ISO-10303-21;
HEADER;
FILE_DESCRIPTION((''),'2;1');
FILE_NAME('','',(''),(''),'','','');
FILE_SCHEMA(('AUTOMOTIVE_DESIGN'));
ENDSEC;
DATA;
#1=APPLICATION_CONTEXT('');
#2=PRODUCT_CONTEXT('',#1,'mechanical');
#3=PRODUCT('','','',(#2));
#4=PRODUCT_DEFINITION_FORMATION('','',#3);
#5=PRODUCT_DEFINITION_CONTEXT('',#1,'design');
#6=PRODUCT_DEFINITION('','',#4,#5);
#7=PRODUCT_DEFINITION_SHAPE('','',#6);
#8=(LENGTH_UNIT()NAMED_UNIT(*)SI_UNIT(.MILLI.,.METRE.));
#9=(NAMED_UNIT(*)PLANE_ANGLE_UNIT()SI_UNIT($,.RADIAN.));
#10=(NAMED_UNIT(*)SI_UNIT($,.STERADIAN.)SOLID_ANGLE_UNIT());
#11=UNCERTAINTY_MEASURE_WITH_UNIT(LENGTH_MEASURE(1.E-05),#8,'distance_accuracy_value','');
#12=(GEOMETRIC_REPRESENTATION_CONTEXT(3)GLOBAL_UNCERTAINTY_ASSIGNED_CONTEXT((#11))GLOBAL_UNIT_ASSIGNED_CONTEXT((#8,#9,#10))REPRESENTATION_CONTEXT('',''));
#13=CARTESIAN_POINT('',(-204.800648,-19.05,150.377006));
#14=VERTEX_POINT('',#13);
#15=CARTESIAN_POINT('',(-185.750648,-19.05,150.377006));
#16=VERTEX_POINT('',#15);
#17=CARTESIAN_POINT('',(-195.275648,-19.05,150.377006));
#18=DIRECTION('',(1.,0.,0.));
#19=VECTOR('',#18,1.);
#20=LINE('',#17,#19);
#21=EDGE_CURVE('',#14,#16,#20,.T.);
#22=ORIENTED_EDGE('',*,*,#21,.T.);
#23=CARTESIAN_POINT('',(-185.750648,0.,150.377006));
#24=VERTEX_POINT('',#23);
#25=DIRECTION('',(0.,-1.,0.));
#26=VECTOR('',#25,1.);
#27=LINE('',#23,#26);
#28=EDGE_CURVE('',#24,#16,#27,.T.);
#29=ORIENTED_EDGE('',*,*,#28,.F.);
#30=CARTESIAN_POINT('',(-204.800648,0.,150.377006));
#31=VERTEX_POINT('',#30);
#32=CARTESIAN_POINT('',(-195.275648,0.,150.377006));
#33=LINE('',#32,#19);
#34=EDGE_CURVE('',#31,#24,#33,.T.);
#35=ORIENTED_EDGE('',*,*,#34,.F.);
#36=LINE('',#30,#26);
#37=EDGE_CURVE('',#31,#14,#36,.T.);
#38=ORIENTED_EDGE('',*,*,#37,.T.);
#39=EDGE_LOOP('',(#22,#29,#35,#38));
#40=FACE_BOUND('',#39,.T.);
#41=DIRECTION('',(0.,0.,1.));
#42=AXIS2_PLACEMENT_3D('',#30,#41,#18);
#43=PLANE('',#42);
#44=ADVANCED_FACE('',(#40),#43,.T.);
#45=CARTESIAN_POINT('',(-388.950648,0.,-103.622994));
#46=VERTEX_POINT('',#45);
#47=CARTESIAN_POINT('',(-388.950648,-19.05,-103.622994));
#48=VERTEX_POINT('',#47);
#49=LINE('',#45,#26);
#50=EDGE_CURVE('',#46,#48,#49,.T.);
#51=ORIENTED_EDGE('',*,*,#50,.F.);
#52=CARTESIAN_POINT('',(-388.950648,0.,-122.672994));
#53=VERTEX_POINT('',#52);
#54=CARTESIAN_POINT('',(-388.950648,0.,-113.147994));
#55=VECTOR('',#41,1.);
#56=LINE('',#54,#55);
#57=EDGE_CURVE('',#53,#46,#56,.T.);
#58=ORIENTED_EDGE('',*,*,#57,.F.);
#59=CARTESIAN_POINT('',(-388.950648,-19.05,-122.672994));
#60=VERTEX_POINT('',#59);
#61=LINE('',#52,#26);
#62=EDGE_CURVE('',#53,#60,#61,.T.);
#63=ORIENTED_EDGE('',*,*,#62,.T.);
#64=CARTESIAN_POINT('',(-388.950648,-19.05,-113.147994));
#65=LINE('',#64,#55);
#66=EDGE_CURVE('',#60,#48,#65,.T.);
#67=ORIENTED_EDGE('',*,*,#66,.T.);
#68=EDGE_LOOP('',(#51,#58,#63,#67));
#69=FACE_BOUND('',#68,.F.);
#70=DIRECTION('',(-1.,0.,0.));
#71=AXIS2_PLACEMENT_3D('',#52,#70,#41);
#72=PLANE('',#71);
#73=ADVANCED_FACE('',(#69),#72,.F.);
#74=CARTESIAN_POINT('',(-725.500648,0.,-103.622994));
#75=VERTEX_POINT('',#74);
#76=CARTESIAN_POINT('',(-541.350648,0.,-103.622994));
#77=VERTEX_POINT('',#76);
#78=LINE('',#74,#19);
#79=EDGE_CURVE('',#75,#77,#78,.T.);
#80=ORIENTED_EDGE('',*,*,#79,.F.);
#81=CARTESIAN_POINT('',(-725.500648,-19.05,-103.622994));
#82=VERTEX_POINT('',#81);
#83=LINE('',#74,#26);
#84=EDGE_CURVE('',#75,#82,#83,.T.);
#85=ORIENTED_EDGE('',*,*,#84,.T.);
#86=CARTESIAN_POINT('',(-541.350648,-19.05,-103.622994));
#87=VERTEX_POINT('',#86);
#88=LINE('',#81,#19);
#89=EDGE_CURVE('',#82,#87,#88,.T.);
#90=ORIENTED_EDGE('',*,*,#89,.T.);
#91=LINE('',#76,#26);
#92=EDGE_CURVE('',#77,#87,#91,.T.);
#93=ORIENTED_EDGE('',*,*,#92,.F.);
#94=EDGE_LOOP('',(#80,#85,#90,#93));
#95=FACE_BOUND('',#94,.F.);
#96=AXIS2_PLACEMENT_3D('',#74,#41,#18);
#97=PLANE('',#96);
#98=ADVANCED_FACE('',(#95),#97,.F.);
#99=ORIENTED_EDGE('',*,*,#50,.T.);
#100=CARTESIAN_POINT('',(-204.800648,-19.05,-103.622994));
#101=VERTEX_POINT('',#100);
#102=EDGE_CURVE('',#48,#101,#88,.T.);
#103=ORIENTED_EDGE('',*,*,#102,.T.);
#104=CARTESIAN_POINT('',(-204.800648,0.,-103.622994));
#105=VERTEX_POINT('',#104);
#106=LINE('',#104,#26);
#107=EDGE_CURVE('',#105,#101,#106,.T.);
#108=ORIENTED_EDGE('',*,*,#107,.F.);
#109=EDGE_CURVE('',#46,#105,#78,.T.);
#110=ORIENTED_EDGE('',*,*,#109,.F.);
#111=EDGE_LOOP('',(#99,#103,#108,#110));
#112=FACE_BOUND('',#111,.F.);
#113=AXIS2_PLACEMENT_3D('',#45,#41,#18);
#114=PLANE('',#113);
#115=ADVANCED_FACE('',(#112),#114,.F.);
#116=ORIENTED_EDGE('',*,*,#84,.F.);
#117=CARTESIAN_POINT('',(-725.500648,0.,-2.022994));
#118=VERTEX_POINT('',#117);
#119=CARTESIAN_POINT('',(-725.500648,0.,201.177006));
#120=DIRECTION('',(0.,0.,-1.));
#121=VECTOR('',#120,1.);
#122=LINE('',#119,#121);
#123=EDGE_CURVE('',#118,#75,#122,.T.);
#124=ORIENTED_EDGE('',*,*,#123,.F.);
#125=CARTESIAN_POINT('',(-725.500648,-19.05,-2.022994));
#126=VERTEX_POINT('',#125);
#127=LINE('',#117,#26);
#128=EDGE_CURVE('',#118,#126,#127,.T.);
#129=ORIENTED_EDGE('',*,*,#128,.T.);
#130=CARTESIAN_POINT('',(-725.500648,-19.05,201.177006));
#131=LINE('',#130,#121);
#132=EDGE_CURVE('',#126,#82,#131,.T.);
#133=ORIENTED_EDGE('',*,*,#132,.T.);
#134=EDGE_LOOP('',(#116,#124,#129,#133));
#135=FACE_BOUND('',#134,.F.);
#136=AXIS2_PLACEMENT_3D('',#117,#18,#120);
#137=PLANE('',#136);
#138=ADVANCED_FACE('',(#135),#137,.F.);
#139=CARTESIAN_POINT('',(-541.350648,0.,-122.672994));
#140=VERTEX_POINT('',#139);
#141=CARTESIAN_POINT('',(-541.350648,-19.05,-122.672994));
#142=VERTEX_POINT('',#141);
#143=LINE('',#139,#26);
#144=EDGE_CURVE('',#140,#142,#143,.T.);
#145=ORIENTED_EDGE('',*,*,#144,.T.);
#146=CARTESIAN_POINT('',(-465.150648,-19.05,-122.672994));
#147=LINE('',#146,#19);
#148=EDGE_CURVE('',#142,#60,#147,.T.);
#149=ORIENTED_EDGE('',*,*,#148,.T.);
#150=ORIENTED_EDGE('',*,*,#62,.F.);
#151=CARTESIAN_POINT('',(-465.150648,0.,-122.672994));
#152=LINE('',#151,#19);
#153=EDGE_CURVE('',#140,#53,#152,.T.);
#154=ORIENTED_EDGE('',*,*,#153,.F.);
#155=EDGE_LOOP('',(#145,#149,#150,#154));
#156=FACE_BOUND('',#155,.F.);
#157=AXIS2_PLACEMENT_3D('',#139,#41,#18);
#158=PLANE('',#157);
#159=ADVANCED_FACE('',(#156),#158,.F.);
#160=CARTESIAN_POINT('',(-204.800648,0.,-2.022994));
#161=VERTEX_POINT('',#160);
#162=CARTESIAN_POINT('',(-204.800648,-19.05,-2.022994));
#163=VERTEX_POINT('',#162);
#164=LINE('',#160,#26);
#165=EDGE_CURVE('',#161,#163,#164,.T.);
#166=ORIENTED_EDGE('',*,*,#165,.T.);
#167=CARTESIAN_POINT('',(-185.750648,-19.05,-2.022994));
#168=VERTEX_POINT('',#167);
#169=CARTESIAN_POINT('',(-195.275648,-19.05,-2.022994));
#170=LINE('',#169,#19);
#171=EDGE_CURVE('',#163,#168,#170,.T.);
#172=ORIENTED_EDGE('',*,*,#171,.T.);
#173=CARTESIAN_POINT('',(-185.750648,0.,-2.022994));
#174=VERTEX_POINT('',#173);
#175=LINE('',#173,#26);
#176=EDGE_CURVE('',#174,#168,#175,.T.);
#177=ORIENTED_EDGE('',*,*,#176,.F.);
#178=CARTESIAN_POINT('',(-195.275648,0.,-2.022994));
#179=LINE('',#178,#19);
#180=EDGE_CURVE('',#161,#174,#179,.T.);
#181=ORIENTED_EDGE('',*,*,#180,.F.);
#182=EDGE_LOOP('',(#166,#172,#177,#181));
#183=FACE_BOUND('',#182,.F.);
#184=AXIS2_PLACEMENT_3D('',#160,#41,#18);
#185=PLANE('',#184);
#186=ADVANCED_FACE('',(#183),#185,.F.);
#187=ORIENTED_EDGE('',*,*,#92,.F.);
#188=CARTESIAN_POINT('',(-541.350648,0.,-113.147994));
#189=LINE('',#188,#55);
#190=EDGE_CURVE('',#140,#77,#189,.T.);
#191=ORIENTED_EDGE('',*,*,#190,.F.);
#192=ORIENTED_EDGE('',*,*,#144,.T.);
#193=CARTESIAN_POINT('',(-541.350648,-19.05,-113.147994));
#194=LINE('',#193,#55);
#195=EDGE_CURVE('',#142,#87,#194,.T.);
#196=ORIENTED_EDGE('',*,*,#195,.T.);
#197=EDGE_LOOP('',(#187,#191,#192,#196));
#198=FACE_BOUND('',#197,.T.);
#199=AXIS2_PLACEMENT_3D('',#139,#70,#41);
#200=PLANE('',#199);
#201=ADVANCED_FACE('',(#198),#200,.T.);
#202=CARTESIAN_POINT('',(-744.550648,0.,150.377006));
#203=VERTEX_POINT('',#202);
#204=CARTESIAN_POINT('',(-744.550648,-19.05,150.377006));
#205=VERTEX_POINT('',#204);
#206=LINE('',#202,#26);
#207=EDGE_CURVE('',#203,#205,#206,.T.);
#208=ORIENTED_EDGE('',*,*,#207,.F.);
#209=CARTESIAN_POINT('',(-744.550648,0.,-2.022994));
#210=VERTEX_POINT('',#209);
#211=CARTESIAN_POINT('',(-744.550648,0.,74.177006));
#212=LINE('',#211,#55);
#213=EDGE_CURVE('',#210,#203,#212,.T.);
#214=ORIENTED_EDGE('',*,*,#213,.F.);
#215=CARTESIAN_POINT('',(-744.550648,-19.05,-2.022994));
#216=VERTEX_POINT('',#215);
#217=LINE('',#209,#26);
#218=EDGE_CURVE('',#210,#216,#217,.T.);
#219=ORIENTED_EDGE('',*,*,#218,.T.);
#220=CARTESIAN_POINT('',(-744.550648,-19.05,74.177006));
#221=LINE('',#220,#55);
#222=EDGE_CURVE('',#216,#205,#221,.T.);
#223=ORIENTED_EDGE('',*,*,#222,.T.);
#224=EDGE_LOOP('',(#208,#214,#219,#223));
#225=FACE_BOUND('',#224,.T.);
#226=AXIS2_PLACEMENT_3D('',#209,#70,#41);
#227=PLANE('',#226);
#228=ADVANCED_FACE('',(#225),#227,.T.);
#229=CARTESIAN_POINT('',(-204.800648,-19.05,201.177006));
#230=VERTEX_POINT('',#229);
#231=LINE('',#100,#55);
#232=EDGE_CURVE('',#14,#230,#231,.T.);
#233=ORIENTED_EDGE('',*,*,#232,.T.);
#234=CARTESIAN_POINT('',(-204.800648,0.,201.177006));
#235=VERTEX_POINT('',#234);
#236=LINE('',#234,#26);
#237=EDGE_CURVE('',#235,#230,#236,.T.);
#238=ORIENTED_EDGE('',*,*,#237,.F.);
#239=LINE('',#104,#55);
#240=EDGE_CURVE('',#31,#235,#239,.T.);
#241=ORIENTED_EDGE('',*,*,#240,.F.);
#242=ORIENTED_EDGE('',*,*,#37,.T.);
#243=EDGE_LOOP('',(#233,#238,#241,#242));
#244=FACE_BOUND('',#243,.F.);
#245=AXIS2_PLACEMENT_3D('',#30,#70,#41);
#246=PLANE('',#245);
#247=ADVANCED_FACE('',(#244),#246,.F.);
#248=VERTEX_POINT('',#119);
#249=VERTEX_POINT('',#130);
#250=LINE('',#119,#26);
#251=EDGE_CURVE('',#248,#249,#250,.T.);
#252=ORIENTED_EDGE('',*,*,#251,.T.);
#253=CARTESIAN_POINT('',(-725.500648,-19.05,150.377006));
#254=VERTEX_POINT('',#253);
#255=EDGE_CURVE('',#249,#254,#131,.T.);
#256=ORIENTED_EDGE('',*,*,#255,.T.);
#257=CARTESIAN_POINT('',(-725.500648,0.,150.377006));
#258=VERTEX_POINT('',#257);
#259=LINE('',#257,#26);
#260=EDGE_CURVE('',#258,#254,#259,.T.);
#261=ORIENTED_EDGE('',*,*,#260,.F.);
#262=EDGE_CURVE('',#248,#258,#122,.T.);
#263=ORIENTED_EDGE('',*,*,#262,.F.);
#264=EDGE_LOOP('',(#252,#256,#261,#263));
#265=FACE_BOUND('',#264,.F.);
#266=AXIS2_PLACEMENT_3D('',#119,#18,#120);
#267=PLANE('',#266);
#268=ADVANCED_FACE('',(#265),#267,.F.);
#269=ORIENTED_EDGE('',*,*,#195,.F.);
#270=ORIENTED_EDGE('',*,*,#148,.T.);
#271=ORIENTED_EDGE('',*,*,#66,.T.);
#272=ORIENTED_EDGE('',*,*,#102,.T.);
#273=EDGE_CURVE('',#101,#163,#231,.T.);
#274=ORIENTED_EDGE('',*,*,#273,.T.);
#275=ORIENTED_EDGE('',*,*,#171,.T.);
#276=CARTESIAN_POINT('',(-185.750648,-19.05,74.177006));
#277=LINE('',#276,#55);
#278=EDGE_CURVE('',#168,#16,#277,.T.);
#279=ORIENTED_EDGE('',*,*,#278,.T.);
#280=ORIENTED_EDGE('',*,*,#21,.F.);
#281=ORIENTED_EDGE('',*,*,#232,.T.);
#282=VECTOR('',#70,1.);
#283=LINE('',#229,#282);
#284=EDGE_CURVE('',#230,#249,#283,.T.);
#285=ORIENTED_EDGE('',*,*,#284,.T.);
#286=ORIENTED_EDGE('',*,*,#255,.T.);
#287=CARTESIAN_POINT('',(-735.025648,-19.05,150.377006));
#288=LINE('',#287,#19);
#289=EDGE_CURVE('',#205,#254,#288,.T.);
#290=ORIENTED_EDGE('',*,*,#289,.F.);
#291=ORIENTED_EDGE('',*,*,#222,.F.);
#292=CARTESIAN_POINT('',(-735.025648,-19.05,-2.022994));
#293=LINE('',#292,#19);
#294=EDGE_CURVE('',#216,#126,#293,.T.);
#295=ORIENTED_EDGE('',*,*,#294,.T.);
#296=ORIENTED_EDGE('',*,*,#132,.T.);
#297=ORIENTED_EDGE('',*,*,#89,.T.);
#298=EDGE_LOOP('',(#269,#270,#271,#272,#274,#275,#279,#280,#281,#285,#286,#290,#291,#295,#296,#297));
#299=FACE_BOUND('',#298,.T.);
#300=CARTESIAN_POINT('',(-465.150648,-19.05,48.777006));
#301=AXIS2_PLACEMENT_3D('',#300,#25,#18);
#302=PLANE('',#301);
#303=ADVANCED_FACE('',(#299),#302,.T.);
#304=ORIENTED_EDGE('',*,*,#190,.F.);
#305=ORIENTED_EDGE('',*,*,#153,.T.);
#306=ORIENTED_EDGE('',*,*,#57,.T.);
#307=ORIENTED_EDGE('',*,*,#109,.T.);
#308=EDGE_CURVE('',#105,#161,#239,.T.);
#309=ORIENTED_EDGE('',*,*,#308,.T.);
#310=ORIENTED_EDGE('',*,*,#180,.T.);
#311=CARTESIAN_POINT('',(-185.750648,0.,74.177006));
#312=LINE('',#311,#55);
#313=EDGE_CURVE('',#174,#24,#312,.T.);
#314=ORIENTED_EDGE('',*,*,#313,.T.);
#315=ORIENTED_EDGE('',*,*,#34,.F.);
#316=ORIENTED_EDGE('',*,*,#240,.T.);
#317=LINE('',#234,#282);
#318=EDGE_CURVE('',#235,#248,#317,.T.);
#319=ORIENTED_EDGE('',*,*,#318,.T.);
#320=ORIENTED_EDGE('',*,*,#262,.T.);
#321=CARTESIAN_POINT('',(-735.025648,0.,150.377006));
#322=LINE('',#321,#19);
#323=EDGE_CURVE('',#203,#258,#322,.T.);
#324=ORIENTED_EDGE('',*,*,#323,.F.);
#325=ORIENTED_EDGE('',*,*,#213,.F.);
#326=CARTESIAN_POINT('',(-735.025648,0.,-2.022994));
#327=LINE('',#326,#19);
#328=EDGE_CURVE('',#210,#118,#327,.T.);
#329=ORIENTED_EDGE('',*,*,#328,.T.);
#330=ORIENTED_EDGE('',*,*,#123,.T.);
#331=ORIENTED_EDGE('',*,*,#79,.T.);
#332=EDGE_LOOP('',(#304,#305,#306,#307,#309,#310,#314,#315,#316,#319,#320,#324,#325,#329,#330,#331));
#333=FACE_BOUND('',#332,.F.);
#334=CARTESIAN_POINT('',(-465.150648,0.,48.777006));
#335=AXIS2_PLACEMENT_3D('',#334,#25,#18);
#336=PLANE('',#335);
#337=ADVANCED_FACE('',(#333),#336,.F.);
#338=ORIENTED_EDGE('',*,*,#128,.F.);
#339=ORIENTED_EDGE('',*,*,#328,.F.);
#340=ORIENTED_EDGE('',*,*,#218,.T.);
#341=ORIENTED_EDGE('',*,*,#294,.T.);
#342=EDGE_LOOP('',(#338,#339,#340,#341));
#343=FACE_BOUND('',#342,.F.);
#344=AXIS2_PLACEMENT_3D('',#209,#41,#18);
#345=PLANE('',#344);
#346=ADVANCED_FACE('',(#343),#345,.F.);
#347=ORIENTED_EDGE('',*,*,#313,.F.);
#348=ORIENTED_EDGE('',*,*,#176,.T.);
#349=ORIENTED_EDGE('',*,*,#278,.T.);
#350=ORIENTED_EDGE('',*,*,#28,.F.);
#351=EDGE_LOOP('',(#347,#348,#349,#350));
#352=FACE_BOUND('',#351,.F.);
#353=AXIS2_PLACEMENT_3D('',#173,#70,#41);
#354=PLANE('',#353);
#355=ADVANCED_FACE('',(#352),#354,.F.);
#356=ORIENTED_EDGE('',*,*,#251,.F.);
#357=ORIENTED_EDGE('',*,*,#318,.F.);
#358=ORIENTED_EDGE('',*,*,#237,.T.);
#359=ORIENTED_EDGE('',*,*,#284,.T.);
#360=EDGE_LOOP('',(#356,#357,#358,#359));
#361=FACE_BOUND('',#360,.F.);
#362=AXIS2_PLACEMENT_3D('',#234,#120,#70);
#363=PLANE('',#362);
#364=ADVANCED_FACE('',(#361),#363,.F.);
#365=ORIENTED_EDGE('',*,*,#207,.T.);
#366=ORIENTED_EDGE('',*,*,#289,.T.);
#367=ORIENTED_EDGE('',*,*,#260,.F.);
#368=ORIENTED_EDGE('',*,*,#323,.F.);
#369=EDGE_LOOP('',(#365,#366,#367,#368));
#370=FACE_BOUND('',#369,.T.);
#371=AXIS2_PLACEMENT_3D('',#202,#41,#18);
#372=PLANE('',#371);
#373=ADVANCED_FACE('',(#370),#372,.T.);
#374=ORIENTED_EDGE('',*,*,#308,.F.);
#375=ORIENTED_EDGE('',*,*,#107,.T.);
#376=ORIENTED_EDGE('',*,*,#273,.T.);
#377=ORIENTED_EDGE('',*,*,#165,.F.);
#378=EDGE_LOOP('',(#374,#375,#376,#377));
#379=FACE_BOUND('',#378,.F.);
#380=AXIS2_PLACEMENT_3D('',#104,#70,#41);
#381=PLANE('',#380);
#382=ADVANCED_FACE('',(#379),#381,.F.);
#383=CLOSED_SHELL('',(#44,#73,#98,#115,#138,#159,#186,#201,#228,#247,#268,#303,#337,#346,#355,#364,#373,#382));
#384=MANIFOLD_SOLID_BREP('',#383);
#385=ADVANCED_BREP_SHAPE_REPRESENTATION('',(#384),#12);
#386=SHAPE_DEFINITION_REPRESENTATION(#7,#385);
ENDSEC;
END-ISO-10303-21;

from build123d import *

# Parameters (mm, degrees)
F0_W     = 19.05
F0_H     = 152.4
F0_W_2   = 152.4
F0_H_2   = 19.05
F1_DEPTH = 19.05


# Not quite as in the source:
# - a feature names something its author has since deleted; it is built from what else it names


with BuildPart() as f1:
    # F0 (on Front) → F1 (new body)
    with BuildSketch(Plane.XZ):
        Polygon((-388.9506477541, -103.6229937509), (-204.8006477541, -103.6229937509), (-204.8006477541, -2.0229937509), (-204.8006477541, 150.3770062491), (-204.8006477541, 201.1770062491), (-725.5006477541, 201.1770062491), (-725.5006477541, 150.3770062491), (-725.5006477541, -2.0229937509), (-725.5006477541, -103.6229937509), (-541.3506477541, -103.6229937509), align=None)
        with Locations((-735.0256477541, 74.1770062491)):
            Rectangle(F0_W, F0_H)
        with Locations((-195.2756477541, 74.1770062491)):
            Rectangle(F0_W, F0_H)
        with Locations((-465.1506477541, -113.1479937509)):
            Rectangle(F0_W_2, F0_H_2)
    extrude(amount=F1_DEPTH)


solid = f1.part
